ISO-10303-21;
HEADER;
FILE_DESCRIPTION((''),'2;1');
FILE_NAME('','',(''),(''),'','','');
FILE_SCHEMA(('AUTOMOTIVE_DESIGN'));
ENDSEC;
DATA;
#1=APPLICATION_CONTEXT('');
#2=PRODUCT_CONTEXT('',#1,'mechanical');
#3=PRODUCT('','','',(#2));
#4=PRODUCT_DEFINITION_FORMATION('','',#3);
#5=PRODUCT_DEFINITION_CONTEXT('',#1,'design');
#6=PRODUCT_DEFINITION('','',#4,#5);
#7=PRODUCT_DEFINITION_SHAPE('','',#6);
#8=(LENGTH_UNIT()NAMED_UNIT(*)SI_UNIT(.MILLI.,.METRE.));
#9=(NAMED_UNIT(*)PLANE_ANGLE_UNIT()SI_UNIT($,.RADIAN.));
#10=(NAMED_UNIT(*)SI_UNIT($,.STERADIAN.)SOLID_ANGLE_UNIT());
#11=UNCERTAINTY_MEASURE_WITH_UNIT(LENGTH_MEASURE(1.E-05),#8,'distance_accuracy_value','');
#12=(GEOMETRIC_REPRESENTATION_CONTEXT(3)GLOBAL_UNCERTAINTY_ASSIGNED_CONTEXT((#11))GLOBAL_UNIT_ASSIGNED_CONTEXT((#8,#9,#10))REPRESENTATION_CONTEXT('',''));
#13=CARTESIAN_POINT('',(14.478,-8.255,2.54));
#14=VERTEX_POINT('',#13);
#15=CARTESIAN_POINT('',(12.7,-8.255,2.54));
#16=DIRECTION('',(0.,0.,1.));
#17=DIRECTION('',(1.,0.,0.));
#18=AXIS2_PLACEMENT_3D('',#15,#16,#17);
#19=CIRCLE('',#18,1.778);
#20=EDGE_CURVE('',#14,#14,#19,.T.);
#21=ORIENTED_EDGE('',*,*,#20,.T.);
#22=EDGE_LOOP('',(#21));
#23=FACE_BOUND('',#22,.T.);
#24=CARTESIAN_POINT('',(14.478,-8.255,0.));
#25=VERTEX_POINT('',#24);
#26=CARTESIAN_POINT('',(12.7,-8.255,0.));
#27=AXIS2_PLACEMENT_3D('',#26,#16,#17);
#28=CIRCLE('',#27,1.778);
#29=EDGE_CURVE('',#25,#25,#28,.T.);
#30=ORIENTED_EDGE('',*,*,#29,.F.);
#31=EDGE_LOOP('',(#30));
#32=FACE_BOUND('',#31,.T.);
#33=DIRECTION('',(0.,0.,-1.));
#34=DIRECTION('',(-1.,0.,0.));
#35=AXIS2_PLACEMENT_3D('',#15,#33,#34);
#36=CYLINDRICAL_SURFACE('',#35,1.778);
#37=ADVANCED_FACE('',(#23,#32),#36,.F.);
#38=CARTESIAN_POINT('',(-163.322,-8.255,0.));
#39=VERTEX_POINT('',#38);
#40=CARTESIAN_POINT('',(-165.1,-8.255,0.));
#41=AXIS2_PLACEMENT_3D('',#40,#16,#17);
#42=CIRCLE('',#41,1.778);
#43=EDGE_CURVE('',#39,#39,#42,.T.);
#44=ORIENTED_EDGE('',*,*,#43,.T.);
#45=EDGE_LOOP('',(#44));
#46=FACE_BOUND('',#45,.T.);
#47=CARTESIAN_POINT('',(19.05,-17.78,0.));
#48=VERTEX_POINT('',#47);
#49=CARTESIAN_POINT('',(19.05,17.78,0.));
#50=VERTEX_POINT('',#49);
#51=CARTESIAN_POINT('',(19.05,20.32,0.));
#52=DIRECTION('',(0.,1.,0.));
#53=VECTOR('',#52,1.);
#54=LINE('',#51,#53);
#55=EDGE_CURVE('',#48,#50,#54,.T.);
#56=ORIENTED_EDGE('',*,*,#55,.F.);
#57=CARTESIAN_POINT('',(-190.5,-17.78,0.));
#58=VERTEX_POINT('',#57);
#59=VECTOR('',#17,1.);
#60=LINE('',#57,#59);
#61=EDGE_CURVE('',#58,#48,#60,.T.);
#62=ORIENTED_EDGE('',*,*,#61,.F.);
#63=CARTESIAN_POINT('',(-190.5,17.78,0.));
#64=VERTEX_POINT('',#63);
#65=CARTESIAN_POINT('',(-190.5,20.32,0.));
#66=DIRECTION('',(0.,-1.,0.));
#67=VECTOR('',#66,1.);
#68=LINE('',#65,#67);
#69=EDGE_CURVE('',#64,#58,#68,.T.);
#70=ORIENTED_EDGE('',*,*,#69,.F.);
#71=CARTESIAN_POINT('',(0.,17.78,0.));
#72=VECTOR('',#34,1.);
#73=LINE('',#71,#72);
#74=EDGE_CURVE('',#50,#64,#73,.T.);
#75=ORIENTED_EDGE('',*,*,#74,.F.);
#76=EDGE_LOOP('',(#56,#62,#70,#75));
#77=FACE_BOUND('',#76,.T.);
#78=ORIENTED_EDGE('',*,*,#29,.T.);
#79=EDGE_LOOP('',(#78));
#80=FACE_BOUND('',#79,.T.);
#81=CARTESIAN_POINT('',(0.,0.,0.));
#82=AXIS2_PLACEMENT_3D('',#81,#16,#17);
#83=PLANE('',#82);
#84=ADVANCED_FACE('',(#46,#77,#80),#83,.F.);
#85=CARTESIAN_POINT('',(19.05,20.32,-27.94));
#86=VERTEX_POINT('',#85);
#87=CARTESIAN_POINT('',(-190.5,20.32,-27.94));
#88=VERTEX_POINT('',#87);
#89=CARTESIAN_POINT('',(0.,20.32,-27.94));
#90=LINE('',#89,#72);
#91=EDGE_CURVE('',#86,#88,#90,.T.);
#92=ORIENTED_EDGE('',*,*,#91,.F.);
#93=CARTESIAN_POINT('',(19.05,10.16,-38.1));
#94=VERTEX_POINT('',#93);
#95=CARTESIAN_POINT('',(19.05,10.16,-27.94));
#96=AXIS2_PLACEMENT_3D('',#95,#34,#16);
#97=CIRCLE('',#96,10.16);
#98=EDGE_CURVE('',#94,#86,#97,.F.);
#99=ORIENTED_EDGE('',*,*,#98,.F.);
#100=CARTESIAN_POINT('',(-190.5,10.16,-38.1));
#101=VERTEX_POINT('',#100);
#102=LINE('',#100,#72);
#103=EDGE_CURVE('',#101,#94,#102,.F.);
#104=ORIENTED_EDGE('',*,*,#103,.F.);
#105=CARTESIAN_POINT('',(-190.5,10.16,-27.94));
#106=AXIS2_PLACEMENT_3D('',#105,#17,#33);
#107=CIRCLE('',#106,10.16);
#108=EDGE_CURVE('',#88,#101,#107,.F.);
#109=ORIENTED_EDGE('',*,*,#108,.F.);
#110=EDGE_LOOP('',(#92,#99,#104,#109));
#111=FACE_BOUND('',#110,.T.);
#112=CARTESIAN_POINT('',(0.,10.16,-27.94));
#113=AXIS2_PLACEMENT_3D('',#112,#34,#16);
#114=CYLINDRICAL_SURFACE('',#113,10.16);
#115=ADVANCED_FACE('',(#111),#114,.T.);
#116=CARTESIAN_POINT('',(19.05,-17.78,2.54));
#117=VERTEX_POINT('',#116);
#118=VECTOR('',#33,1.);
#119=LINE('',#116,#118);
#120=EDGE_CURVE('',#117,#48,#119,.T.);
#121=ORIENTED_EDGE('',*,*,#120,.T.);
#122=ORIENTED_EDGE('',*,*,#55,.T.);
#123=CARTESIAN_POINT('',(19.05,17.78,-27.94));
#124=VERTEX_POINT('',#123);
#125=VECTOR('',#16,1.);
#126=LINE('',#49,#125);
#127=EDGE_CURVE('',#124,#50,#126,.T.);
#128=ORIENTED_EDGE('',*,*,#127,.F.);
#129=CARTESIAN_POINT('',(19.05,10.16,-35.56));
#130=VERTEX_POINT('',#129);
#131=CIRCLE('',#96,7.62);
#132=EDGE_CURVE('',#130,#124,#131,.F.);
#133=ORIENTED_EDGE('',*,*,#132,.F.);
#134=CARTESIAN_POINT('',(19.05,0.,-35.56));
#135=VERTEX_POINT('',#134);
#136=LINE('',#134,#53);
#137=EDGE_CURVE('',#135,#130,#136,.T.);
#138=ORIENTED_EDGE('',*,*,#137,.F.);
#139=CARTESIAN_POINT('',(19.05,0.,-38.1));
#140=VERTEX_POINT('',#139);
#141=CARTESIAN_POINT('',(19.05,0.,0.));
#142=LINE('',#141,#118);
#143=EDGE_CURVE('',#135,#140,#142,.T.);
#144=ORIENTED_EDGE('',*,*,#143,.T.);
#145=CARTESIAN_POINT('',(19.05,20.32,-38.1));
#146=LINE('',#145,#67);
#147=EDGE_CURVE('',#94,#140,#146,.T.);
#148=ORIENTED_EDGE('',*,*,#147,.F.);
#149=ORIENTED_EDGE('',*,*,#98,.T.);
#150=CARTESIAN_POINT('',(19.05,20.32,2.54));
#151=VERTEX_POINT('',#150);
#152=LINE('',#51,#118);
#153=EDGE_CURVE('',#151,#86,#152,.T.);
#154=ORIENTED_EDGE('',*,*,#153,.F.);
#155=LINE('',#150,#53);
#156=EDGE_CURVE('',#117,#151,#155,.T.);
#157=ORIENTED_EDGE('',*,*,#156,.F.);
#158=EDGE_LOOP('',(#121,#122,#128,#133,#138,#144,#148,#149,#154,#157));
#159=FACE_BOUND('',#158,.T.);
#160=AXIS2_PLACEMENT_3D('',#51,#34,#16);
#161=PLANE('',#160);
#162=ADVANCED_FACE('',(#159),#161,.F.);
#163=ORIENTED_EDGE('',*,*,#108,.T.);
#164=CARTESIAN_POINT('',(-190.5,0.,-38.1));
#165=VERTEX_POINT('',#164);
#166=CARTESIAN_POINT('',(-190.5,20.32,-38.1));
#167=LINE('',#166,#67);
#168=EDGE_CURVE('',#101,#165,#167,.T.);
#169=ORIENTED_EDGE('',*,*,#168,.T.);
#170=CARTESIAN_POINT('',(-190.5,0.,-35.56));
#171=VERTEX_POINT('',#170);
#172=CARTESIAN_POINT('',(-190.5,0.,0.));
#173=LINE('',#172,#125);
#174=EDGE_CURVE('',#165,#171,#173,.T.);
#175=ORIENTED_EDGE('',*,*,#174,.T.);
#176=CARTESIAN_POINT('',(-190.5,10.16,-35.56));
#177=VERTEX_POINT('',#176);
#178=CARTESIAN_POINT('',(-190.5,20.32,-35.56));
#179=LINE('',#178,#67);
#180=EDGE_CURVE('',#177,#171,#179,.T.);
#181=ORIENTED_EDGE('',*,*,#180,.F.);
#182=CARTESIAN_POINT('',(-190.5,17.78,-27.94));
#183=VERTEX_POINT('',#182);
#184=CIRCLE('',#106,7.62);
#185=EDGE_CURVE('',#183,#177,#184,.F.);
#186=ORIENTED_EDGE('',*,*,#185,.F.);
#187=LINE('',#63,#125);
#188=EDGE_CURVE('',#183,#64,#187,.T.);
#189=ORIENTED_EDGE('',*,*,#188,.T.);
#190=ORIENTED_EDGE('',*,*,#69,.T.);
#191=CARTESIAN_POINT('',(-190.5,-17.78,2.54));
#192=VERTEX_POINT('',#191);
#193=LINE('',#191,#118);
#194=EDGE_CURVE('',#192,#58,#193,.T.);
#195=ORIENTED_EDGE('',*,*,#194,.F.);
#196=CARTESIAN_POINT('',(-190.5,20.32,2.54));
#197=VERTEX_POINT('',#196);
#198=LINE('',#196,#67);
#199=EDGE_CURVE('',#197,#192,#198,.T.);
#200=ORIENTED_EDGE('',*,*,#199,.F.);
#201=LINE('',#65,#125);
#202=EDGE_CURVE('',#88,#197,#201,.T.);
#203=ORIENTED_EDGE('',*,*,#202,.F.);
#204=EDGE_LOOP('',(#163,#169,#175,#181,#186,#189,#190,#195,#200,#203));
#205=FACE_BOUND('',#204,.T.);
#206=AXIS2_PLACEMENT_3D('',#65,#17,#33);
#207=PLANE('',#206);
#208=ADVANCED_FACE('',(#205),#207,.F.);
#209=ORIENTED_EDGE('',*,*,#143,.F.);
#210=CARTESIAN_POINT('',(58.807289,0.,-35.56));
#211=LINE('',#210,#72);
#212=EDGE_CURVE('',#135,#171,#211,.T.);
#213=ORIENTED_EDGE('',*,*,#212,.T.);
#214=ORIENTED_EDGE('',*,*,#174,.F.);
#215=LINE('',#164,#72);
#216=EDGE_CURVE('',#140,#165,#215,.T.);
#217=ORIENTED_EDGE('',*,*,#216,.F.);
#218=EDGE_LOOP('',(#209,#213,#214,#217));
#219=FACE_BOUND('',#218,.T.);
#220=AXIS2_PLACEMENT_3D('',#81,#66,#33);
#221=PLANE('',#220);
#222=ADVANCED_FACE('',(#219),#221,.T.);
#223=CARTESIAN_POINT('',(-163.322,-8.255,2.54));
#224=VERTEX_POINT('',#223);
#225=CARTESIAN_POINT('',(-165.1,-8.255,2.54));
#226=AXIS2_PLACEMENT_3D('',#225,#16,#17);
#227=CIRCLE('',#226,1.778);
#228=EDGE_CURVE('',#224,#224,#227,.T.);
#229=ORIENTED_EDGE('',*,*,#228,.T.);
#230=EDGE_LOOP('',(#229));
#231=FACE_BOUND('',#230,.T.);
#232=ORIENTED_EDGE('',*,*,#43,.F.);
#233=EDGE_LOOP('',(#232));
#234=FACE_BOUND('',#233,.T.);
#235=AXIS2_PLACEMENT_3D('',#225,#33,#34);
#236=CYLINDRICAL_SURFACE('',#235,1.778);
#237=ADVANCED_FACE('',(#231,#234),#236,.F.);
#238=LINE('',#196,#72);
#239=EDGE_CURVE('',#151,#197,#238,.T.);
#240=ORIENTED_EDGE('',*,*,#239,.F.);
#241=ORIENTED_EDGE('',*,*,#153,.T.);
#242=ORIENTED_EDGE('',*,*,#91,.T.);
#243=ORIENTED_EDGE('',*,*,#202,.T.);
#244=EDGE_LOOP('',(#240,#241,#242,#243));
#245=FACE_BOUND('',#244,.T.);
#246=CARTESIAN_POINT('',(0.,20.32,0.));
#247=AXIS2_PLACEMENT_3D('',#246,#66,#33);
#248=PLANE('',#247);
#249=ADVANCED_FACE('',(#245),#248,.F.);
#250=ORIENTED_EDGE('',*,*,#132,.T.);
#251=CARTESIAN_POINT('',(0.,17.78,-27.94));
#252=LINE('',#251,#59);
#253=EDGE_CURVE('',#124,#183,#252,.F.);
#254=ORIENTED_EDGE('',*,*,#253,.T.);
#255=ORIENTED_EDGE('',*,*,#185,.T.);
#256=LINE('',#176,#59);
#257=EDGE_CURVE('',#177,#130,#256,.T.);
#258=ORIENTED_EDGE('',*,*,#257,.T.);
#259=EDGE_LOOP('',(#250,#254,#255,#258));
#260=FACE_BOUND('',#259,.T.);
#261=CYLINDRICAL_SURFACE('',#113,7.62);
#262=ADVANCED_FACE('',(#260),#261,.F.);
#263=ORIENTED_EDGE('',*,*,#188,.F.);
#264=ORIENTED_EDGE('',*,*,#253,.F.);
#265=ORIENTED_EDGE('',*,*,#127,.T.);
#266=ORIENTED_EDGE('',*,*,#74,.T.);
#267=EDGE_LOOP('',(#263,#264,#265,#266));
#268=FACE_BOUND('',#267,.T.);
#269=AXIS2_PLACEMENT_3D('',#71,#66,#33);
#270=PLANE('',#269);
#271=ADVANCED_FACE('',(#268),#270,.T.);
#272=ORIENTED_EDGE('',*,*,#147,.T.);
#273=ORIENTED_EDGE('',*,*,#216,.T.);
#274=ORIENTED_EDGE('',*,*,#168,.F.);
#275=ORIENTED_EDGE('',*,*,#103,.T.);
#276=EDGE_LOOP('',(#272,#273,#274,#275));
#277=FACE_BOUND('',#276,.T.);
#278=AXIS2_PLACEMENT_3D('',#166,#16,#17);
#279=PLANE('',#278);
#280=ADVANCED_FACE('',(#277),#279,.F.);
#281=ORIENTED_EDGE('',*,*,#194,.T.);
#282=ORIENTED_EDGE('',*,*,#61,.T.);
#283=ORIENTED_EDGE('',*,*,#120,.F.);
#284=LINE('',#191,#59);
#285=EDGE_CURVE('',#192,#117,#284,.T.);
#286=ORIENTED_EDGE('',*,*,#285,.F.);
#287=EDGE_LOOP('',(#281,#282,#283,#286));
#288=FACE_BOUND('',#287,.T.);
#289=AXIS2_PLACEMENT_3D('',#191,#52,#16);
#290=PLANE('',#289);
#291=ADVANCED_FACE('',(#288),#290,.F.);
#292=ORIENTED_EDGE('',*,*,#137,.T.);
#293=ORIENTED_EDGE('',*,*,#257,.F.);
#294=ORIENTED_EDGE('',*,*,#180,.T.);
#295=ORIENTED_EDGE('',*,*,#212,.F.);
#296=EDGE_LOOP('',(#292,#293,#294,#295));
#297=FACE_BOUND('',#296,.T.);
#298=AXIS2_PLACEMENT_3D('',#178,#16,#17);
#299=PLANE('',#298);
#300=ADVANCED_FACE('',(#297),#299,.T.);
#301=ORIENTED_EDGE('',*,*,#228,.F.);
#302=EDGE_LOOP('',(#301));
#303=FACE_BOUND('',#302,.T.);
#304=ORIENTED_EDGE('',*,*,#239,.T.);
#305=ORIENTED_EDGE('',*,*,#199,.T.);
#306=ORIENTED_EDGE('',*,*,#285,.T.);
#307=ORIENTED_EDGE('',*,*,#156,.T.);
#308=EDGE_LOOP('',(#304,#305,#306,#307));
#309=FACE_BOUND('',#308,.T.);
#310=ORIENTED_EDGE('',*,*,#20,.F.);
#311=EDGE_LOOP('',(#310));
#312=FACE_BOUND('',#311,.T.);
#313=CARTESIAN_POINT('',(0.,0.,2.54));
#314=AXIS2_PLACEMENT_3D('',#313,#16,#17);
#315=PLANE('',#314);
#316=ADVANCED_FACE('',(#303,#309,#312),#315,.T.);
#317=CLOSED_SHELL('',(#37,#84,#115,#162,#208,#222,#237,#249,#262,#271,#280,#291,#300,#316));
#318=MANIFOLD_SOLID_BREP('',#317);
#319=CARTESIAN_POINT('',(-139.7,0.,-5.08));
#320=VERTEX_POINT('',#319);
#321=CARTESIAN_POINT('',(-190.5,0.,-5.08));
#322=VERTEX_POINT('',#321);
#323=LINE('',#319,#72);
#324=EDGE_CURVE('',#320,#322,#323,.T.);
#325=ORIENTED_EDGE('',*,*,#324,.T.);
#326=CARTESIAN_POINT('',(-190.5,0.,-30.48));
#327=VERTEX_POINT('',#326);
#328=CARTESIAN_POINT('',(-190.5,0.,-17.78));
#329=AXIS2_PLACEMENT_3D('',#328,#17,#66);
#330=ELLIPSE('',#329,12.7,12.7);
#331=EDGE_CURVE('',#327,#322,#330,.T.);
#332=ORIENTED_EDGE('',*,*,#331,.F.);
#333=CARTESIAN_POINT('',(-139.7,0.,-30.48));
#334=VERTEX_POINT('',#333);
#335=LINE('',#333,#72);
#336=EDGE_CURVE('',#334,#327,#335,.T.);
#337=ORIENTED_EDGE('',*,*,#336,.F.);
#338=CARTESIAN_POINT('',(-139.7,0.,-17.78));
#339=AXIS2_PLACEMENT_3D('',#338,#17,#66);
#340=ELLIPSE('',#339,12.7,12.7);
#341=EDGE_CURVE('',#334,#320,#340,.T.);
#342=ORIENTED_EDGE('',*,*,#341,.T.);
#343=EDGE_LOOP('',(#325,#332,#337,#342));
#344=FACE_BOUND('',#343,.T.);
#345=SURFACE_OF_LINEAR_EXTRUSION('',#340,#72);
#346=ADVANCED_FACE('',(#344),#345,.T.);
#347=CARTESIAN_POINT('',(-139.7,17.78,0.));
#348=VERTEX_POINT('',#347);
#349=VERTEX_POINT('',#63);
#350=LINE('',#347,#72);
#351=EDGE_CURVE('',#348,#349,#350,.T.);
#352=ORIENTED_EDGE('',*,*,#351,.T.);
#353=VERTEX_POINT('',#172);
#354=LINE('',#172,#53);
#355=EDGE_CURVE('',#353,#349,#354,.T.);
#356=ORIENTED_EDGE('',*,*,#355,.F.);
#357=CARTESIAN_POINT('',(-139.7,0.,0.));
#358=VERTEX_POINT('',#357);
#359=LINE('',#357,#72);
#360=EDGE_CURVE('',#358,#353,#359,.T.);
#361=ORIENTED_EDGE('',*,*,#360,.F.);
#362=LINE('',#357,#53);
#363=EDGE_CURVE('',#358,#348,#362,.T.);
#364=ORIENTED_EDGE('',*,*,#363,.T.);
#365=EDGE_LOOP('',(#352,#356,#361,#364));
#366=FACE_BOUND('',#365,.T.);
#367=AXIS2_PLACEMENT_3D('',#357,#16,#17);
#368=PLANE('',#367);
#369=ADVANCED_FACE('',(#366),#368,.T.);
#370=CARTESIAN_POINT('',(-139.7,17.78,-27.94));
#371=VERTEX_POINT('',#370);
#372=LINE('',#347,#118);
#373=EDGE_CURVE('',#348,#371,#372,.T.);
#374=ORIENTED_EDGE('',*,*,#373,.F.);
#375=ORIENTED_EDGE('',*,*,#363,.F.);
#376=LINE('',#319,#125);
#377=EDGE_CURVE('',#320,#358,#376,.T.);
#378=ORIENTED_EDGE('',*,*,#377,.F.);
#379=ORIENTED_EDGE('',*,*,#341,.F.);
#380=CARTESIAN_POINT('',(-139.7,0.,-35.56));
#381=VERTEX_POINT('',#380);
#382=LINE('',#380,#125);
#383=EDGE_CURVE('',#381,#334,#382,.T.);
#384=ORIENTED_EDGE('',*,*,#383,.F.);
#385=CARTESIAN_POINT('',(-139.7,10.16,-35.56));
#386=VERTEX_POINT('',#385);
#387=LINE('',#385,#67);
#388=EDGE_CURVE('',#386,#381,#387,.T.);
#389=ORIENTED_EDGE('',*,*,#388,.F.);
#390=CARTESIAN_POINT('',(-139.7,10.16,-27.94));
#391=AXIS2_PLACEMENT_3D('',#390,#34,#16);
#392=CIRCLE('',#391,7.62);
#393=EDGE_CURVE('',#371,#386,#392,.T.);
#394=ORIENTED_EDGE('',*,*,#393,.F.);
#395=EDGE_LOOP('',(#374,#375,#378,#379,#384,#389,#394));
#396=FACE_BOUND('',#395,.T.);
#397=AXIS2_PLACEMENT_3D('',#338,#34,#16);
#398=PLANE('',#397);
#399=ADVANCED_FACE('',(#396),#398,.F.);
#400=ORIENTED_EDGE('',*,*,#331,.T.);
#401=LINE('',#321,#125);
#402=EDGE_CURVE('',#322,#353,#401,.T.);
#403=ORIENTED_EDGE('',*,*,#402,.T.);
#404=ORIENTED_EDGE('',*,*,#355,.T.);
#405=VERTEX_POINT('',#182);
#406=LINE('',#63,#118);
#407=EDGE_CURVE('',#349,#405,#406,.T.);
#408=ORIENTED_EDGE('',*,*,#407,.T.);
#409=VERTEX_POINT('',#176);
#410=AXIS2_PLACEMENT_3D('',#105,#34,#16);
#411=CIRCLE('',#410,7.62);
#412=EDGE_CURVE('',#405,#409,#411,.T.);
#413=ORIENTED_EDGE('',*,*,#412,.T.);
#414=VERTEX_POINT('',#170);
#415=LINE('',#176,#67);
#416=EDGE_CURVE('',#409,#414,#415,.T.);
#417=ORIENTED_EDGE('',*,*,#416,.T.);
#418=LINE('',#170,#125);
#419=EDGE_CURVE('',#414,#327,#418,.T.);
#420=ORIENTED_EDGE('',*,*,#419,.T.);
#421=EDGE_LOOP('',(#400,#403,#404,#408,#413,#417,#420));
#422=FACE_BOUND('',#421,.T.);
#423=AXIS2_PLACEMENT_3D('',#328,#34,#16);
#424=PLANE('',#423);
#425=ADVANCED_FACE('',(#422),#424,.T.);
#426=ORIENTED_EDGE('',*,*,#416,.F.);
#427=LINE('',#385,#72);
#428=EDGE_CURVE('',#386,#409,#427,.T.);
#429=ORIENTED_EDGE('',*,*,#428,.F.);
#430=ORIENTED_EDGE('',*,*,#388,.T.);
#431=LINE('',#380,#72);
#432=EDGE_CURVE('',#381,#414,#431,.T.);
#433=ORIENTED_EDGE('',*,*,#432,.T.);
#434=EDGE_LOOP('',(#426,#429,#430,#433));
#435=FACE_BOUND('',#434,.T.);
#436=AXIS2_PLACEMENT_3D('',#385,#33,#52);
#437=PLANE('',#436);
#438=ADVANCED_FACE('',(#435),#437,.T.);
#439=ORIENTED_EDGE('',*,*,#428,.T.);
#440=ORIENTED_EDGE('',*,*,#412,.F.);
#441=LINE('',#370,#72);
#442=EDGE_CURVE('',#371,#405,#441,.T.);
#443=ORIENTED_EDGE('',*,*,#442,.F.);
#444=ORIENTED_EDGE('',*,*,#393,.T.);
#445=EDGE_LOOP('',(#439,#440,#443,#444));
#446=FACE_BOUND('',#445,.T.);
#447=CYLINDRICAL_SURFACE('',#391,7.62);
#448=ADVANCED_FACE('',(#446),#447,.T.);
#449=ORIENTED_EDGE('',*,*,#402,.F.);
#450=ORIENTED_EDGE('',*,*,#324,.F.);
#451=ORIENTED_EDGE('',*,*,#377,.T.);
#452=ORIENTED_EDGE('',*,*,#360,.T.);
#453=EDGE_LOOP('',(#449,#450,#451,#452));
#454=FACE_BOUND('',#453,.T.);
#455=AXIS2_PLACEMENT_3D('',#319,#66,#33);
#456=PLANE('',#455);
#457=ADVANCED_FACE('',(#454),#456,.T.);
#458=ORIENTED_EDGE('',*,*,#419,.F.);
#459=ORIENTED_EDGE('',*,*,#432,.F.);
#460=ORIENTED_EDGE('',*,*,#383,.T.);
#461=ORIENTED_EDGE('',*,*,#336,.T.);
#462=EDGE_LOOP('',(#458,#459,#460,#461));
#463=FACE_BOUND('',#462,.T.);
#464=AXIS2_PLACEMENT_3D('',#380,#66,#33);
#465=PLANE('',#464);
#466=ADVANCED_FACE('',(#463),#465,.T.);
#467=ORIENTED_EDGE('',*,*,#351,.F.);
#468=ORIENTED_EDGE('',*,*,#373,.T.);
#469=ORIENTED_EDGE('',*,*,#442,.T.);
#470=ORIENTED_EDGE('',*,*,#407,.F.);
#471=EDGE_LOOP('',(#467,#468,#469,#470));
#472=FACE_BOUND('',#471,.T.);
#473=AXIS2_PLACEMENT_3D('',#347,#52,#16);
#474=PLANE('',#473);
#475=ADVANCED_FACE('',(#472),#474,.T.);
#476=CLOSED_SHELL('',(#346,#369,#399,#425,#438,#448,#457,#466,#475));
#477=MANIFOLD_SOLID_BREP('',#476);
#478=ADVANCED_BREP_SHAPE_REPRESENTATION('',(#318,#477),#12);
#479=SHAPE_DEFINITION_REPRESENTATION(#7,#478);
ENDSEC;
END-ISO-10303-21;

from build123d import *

# Parameters (mm, degrees)
SKETCH1_W           = 209.55
SKETCH1_H           = 38.1
BOSS_EXTRUDE1_DEPTH = 20.32
FILLET1_R           = 10.16
SKETCH2_W           = 209.55
SKETCH2_H           = 38.1
SKETCH2_R           = 1.778
BOSS_EXTRUDE2_DEPTH = 2.54
SHELL5_START        = -190.5
SHELL5_DEPTH        = 207.01
CUT_EXTRUDE1_DEPTH  = 209.55
BOSS_EXTRUDE3_DEPTH = 50.8


# Read off the part's stored shape, not the designer's step: Shell5
with BuildPart() as part:
    # Sketch1 → Boss-Extrude1 (new body)
    with BuildSketch(Plane(origin=(0, 0, 0), x_dir=(1, 0, 0), z_dir=(0, 1, 0))):
        with Locations((-85.725, 19.05)):
            Rectangle(SKETCH1_W, SKETCH1_H)
    extrude(amount=BOSS_EXTRUDE1_DEPTH)

    # Fillet1
    fillet1_edges = [part.edges().sort_by_distance(p)[0] for p in [
        (-85.725, 20.32, -38.1),
    ]]
    fillet(fillet1_edges, radius=FILLET1_R)

    # Sketch2 → Boss-Extrude2 (add)
    with BuildSketch(Plane.XY):
        with Locations((-85.725, 1.27)):
            Rectangle(SKETCH2_W, SKETCH2_H)
        with Locations((-165.1, -8.255)):
            Circle(SKETCH2_R, mode=Mode.SUBTRACT)
        with Locations((12.7, -8.255)):
            Circle(SKETCH2_R, mode=Mode.SUBTRACT)
    extrude(amount=BOSS_EXTRUDE2_DEPTH)

    # Shell5 outline → Shell5 (cut)
    with BuildSketch(Plane.YZ.offset(SHELL5_START)):
        with BuildLine():
            Line((17.78, -27.94), (17.78, 0))
            Line((17.78, 0), (2.54, 0))
            Line((2.54, 0), (2.54, -35.56))
            Line((2.54, -35.56), (10.16, -35.56))
            ThreePointArc((10.16, -35.56), (15.548153673, -33.328153673), (17.78, -27.94))
        make_face()
    extrude(amount=SHELL5_DEPTH, mode=Mode.SUBTRACT)

    # Sketch3 → Cut-Extrude1 (cut)
    with BuildSketch(Plane.ZY.offset(190.5)):
        with BuildLine():
            Line((0, 0), (-35.56, 0))
            Line((-35.56, 0), (-35.56, 2.54))
            Line((-35.56, 2.54), (-35.56, 10.16))
            ThreePointArc((-35.56, 10.16), (-33.328153673, 15.548153673), (-27.94, 17.78))
            Line((-27.94, 17.78), (0, 17.78))
            Line((0, 17.78), (0, 0))
        make_face()
    extrude(amount=-CUT_EXTRUDE1_DEPTH, mode=Mode.SUBTRACT)


with BuildPart() as body_2:
    # Sketch4 → Boss-Extrude3 (new body)
    with BuildSketch(Plane.ZY.offset(190.5)):
        with BuildLine():
            Line((-35.56, 0), (-30.48, 0))
            add(Edge.make_bspline(
                [(-5.08, 0), (-5.08, 12.7), (-17.78, 12.7), (-30.48, 12.7), (-30.48, 0)],
                knots=[3.141592654, 3.141592654, 3.141592654, 4.71238898, 4.71238898, 6.283185307, 6.283185307, 6.283185307], degree=2, weights=[1, 0.707106781, 1, 0.707106781, 1]))
            Line((-5.08, 0), (0, 0))
            Line((0, 0), (0, 17.78))
            Line((0, 17.78), (-27.94, 17.78))
            ThreePointArc((-27.94, 17.78), (-33.328153673, 15.548153673), (-35.56, 10.16))
            Line((-35.56, 10.16), (-35.56, 0))
        make_face()
    extrude(amount=-BOSS_EXTRUDE3_DEPTH)


solid = Compound([part.part, body_2.part])
